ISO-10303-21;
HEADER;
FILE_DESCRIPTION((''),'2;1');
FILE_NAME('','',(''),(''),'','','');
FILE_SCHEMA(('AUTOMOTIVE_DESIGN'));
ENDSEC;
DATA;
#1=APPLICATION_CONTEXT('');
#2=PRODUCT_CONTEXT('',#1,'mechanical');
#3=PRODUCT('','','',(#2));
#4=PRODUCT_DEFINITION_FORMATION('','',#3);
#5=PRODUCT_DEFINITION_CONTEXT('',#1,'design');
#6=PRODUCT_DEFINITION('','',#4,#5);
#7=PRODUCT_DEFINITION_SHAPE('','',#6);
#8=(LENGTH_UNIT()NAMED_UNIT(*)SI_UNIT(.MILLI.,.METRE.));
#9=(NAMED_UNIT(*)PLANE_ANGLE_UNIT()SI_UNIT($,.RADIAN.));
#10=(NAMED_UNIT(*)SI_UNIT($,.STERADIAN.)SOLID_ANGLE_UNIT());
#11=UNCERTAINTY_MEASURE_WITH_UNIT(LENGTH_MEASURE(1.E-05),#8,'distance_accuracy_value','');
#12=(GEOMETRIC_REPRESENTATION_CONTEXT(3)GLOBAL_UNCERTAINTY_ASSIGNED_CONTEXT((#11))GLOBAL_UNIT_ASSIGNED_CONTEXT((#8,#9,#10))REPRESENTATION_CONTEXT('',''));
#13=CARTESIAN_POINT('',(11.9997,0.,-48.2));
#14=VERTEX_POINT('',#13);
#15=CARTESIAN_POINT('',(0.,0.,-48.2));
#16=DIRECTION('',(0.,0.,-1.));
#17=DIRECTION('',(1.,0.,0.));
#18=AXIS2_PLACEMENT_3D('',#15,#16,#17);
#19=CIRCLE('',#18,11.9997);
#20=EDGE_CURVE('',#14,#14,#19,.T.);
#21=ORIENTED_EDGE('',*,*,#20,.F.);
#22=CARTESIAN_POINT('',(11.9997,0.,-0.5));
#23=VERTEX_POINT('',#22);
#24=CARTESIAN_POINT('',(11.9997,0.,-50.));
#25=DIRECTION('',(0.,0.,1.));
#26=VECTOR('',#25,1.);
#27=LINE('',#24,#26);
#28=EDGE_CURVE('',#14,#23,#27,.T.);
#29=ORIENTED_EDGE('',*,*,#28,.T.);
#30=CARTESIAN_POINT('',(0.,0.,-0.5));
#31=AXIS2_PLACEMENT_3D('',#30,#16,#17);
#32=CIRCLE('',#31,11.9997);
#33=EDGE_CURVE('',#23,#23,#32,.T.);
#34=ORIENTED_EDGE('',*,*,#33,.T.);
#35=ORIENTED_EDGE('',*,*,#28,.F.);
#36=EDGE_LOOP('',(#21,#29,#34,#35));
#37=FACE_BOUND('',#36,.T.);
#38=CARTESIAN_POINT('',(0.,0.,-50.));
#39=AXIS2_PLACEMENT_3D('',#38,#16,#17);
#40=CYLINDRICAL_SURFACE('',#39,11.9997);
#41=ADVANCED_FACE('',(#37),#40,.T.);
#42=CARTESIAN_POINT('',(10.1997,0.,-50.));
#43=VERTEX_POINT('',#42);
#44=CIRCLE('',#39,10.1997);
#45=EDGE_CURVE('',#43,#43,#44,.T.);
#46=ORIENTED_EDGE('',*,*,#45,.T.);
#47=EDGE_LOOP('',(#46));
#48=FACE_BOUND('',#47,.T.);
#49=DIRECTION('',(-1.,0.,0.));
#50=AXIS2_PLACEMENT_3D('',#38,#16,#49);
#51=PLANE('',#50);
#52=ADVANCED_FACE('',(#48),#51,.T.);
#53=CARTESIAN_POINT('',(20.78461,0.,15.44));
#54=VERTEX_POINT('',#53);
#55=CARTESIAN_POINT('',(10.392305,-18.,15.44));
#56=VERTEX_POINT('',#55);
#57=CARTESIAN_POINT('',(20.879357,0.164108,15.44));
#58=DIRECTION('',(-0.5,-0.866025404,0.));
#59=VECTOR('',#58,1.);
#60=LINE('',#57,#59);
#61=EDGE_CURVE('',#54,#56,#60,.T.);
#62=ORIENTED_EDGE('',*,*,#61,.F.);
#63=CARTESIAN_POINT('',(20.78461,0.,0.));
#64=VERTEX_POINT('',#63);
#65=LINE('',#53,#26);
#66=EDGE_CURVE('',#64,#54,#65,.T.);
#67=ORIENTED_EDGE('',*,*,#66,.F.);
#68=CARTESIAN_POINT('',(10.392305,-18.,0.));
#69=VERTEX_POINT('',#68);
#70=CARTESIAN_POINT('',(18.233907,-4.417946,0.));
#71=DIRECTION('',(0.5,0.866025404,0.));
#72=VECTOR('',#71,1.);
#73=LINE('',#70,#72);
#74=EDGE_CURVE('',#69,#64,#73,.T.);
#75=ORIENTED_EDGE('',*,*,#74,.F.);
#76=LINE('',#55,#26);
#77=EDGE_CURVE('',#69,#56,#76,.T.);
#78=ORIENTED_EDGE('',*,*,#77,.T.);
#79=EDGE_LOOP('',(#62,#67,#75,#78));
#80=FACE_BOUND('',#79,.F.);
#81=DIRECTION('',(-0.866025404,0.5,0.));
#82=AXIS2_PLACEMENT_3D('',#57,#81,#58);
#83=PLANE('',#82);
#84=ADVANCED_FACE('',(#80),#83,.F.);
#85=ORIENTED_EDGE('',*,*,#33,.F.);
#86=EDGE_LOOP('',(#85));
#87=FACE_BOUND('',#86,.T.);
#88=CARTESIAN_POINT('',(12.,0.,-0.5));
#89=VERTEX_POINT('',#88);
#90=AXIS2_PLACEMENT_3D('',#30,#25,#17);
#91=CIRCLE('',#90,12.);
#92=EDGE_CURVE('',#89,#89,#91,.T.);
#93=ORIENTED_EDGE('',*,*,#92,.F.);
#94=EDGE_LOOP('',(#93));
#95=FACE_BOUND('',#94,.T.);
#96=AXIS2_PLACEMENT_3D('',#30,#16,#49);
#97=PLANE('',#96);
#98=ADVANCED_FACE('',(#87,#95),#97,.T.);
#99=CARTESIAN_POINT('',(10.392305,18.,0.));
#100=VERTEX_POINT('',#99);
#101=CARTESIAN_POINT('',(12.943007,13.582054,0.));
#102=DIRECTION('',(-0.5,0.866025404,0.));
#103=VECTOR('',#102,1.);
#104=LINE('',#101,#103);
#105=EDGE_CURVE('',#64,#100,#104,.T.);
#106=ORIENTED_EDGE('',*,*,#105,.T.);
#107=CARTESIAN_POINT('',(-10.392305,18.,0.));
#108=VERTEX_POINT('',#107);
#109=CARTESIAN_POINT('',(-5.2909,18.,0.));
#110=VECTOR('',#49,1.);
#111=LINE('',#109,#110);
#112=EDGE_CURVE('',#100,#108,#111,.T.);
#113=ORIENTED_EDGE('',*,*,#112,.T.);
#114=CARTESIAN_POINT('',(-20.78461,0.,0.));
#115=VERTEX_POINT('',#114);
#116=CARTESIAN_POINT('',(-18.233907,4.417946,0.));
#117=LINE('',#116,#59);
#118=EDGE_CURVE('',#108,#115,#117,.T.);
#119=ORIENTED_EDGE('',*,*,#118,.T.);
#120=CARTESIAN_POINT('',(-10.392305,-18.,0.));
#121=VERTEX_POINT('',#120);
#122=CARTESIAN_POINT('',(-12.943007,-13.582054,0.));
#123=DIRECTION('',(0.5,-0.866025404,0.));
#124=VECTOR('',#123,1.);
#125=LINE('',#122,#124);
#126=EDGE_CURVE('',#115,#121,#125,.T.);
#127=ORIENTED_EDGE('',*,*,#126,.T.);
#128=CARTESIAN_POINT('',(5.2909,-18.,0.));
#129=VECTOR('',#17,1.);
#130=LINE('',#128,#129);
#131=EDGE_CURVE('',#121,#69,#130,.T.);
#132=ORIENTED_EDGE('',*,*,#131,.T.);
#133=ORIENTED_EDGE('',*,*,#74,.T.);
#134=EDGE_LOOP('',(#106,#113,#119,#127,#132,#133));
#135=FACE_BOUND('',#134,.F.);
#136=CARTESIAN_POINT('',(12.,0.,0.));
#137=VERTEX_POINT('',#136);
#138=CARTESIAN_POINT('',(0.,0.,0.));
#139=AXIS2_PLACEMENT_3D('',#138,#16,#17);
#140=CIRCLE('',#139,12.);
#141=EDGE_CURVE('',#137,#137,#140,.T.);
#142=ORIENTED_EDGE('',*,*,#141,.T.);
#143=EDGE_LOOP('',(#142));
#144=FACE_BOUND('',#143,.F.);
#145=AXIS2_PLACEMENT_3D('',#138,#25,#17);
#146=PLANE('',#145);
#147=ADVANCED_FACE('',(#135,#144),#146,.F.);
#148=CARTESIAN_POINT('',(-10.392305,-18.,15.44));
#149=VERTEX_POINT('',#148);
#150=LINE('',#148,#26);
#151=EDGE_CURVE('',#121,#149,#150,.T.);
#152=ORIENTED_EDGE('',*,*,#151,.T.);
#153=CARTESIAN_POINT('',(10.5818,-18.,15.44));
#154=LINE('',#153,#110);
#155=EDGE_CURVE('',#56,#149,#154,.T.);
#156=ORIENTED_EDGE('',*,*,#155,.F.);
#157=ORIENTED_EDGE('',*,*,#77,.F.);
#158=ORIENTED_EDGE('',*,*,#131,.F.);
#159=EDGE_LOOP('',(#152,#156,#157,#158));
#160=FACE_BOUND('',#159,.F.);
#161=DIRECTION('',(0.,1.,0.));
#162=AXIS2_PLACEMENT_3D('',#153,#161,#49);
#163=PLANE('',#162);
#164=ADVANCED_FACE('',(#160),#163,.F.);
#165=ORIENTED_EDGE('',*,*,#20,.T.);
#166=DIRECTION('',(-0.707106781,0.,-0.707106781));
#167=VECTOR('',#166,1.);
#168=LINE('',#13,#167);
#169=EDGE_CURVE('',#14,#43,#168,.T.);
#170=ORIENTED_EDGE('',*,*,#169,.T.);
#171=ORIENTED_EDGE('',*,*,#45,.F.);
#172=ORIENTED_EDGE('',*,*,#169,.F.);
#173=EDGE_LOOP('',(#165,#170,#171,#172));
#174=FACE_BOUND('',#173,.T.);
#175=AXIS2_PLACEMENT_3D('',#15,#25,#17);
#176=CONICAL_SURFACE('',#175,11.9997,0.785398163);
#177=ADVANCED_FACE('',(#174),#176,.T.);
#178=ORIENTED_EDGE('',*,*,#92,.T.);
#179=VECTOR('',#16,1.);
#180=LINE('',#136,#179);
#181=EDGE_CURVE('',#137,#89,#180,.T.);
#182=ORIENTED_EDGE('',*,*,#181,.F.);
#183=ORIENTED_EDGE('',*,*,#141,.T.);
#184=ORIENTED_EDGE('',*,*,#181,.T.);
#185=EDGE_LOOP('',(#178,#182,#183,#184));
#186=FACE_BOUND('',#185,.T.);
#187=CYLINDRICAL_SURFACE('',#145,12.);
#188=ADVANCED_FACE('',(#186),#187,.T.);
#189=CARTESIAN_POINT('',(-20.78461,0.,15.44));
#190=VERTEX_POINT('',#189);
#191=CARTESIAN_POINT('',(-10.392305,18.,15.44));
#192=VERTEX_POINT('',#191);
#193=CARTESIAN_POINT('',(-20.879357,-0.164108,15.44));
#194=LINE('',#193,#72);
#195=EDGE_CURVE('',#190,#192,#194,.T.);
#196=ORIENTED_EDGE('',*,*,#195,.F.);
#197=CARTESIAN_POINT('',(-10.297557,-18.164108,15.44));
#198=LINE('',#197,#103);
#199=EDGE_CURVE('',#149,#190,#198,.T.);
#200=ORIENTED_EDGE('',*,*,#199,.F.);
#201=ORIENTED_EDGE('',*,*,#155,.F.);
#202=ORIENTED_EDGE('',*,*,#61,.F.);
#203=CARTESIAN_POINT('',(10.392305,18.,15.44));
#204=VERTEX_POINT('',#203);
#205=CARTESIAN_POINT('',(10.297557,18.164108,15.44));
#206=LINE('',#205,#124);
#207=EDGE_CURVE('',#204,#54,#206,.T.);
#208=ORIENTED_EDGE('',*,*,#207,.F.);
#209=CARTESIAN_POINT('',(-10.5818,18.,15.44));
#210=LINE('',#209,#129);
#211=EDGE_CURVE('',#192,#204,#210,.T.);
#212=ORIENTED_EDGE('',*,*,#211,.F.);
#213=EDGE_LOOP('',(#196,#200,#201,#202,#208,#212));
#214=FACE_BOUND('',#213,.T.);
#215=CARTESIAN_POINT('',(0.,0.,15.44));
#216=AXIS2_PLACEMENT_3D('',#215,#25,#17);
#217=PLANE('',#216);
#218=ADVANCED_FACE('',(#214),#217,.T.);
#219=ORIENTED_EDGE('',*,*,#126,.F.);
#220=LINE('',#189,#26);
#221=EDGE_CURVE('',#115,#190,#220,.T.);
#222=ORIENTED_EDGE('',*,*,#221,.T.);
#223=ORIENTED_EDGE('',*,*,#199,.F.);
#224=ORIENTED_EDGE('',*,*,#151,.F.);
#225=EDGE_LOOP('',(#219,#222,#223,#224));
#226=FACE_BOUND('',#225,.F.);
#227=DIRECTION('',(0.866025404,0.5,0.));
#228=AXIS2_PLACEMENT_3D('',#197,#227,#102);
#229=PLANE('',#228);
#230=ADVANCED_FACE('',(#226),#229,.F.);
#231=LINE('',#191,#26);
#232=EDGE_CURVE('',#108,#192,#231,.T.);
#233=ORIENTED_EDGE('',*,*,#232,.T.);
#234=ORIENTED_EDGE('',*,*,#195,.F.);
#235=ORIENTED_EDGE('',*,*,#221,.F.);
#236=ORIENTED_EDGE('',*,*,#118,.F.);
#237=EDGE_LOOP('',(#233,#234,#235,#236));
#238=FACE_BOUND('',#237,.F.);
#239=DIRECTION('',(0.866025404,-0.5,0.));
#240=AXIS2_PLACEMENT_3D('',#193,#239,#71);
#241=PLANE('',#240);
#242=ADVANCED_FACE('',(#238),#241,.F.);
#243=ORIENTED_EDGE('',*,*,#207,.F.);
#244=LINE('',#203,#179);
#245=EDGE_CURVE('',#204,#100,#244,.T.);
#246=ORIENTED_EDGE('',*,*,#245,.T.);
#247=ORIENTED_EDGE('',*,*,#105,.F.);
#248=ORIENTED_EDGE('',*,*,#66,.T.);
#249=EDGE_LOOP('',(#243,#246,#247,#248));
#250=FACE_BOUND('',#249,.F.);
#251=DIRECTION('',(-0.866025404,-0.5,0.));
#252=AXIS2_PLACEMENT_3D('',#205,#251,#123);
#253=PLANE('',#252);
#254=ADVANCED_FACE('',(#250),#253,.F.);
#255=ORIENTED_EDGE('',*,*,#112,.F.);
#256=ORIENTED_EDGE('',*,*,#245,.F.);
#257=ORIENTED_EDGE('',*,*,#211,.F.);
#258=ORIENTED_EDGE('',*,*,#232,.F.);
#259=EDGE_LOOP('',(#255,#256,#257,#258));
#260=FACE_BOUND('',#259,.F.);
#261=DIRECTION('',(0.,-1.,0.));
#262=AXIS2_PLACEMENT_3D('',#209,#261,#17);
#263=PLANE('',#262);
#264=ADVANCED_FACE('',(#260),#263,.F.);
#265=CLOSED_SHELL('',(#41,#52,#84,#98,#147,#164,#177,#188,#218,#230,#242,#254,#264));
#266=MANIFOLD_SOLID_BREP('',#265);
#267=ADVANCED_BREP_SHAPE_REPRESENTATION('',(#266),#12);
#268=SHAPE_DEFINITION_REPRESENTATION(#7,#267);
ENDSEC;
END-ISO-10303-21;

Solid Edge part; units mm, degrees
sketch "Sketch1" plane through (0, 0, 0) normal (0, 0, 1) x (1, 0, 0)
  circle A0 centre (0, 0) radius 20.88
  dimension "D1" = 41.76
extrude "Protrusion1" add sketch "Sketch1" along normal blind 15.44
sketch "Sketch2" plane through (0, 0, 0) normal (0, 0, -1) x (1, 0, 0)
  circle A0 centre (0, 0) radius 12
extrude "Protrusion2" add sketch "Sketch2" along normal blind 50
sketch "Sketch3" plane through (0, 0, -50) normal (0, 0, -1) x (1, 0, 0)
  circle A0 centre (0, 0) radius 11.9997
extrude "Cutout1" cut sketch "Sketch3" against normal blind 49.5 flip side to cut
chamfer "Chamfer_1" distance 1.8 angle 45 1 edges at (-11.9997, 0, -50)
sketch "Sketch4" plane through (0, 0, 15.44) normal (0, 0, 1) x (1, 0, 0)
  line L0 (-10.5818, 18) -> (10.5818, 18)
  dimension "D1" = 36
extrude "Cutout2" cut sketch "Sketch4" against normal up to next material side at (0, 18.05, 15.44)
pattern_circular "Pattern1" count 6 over 360 about axis through (0, 0, 15.44) along (0, 0, 1) of "Cutout2"
properties part number "300543"
